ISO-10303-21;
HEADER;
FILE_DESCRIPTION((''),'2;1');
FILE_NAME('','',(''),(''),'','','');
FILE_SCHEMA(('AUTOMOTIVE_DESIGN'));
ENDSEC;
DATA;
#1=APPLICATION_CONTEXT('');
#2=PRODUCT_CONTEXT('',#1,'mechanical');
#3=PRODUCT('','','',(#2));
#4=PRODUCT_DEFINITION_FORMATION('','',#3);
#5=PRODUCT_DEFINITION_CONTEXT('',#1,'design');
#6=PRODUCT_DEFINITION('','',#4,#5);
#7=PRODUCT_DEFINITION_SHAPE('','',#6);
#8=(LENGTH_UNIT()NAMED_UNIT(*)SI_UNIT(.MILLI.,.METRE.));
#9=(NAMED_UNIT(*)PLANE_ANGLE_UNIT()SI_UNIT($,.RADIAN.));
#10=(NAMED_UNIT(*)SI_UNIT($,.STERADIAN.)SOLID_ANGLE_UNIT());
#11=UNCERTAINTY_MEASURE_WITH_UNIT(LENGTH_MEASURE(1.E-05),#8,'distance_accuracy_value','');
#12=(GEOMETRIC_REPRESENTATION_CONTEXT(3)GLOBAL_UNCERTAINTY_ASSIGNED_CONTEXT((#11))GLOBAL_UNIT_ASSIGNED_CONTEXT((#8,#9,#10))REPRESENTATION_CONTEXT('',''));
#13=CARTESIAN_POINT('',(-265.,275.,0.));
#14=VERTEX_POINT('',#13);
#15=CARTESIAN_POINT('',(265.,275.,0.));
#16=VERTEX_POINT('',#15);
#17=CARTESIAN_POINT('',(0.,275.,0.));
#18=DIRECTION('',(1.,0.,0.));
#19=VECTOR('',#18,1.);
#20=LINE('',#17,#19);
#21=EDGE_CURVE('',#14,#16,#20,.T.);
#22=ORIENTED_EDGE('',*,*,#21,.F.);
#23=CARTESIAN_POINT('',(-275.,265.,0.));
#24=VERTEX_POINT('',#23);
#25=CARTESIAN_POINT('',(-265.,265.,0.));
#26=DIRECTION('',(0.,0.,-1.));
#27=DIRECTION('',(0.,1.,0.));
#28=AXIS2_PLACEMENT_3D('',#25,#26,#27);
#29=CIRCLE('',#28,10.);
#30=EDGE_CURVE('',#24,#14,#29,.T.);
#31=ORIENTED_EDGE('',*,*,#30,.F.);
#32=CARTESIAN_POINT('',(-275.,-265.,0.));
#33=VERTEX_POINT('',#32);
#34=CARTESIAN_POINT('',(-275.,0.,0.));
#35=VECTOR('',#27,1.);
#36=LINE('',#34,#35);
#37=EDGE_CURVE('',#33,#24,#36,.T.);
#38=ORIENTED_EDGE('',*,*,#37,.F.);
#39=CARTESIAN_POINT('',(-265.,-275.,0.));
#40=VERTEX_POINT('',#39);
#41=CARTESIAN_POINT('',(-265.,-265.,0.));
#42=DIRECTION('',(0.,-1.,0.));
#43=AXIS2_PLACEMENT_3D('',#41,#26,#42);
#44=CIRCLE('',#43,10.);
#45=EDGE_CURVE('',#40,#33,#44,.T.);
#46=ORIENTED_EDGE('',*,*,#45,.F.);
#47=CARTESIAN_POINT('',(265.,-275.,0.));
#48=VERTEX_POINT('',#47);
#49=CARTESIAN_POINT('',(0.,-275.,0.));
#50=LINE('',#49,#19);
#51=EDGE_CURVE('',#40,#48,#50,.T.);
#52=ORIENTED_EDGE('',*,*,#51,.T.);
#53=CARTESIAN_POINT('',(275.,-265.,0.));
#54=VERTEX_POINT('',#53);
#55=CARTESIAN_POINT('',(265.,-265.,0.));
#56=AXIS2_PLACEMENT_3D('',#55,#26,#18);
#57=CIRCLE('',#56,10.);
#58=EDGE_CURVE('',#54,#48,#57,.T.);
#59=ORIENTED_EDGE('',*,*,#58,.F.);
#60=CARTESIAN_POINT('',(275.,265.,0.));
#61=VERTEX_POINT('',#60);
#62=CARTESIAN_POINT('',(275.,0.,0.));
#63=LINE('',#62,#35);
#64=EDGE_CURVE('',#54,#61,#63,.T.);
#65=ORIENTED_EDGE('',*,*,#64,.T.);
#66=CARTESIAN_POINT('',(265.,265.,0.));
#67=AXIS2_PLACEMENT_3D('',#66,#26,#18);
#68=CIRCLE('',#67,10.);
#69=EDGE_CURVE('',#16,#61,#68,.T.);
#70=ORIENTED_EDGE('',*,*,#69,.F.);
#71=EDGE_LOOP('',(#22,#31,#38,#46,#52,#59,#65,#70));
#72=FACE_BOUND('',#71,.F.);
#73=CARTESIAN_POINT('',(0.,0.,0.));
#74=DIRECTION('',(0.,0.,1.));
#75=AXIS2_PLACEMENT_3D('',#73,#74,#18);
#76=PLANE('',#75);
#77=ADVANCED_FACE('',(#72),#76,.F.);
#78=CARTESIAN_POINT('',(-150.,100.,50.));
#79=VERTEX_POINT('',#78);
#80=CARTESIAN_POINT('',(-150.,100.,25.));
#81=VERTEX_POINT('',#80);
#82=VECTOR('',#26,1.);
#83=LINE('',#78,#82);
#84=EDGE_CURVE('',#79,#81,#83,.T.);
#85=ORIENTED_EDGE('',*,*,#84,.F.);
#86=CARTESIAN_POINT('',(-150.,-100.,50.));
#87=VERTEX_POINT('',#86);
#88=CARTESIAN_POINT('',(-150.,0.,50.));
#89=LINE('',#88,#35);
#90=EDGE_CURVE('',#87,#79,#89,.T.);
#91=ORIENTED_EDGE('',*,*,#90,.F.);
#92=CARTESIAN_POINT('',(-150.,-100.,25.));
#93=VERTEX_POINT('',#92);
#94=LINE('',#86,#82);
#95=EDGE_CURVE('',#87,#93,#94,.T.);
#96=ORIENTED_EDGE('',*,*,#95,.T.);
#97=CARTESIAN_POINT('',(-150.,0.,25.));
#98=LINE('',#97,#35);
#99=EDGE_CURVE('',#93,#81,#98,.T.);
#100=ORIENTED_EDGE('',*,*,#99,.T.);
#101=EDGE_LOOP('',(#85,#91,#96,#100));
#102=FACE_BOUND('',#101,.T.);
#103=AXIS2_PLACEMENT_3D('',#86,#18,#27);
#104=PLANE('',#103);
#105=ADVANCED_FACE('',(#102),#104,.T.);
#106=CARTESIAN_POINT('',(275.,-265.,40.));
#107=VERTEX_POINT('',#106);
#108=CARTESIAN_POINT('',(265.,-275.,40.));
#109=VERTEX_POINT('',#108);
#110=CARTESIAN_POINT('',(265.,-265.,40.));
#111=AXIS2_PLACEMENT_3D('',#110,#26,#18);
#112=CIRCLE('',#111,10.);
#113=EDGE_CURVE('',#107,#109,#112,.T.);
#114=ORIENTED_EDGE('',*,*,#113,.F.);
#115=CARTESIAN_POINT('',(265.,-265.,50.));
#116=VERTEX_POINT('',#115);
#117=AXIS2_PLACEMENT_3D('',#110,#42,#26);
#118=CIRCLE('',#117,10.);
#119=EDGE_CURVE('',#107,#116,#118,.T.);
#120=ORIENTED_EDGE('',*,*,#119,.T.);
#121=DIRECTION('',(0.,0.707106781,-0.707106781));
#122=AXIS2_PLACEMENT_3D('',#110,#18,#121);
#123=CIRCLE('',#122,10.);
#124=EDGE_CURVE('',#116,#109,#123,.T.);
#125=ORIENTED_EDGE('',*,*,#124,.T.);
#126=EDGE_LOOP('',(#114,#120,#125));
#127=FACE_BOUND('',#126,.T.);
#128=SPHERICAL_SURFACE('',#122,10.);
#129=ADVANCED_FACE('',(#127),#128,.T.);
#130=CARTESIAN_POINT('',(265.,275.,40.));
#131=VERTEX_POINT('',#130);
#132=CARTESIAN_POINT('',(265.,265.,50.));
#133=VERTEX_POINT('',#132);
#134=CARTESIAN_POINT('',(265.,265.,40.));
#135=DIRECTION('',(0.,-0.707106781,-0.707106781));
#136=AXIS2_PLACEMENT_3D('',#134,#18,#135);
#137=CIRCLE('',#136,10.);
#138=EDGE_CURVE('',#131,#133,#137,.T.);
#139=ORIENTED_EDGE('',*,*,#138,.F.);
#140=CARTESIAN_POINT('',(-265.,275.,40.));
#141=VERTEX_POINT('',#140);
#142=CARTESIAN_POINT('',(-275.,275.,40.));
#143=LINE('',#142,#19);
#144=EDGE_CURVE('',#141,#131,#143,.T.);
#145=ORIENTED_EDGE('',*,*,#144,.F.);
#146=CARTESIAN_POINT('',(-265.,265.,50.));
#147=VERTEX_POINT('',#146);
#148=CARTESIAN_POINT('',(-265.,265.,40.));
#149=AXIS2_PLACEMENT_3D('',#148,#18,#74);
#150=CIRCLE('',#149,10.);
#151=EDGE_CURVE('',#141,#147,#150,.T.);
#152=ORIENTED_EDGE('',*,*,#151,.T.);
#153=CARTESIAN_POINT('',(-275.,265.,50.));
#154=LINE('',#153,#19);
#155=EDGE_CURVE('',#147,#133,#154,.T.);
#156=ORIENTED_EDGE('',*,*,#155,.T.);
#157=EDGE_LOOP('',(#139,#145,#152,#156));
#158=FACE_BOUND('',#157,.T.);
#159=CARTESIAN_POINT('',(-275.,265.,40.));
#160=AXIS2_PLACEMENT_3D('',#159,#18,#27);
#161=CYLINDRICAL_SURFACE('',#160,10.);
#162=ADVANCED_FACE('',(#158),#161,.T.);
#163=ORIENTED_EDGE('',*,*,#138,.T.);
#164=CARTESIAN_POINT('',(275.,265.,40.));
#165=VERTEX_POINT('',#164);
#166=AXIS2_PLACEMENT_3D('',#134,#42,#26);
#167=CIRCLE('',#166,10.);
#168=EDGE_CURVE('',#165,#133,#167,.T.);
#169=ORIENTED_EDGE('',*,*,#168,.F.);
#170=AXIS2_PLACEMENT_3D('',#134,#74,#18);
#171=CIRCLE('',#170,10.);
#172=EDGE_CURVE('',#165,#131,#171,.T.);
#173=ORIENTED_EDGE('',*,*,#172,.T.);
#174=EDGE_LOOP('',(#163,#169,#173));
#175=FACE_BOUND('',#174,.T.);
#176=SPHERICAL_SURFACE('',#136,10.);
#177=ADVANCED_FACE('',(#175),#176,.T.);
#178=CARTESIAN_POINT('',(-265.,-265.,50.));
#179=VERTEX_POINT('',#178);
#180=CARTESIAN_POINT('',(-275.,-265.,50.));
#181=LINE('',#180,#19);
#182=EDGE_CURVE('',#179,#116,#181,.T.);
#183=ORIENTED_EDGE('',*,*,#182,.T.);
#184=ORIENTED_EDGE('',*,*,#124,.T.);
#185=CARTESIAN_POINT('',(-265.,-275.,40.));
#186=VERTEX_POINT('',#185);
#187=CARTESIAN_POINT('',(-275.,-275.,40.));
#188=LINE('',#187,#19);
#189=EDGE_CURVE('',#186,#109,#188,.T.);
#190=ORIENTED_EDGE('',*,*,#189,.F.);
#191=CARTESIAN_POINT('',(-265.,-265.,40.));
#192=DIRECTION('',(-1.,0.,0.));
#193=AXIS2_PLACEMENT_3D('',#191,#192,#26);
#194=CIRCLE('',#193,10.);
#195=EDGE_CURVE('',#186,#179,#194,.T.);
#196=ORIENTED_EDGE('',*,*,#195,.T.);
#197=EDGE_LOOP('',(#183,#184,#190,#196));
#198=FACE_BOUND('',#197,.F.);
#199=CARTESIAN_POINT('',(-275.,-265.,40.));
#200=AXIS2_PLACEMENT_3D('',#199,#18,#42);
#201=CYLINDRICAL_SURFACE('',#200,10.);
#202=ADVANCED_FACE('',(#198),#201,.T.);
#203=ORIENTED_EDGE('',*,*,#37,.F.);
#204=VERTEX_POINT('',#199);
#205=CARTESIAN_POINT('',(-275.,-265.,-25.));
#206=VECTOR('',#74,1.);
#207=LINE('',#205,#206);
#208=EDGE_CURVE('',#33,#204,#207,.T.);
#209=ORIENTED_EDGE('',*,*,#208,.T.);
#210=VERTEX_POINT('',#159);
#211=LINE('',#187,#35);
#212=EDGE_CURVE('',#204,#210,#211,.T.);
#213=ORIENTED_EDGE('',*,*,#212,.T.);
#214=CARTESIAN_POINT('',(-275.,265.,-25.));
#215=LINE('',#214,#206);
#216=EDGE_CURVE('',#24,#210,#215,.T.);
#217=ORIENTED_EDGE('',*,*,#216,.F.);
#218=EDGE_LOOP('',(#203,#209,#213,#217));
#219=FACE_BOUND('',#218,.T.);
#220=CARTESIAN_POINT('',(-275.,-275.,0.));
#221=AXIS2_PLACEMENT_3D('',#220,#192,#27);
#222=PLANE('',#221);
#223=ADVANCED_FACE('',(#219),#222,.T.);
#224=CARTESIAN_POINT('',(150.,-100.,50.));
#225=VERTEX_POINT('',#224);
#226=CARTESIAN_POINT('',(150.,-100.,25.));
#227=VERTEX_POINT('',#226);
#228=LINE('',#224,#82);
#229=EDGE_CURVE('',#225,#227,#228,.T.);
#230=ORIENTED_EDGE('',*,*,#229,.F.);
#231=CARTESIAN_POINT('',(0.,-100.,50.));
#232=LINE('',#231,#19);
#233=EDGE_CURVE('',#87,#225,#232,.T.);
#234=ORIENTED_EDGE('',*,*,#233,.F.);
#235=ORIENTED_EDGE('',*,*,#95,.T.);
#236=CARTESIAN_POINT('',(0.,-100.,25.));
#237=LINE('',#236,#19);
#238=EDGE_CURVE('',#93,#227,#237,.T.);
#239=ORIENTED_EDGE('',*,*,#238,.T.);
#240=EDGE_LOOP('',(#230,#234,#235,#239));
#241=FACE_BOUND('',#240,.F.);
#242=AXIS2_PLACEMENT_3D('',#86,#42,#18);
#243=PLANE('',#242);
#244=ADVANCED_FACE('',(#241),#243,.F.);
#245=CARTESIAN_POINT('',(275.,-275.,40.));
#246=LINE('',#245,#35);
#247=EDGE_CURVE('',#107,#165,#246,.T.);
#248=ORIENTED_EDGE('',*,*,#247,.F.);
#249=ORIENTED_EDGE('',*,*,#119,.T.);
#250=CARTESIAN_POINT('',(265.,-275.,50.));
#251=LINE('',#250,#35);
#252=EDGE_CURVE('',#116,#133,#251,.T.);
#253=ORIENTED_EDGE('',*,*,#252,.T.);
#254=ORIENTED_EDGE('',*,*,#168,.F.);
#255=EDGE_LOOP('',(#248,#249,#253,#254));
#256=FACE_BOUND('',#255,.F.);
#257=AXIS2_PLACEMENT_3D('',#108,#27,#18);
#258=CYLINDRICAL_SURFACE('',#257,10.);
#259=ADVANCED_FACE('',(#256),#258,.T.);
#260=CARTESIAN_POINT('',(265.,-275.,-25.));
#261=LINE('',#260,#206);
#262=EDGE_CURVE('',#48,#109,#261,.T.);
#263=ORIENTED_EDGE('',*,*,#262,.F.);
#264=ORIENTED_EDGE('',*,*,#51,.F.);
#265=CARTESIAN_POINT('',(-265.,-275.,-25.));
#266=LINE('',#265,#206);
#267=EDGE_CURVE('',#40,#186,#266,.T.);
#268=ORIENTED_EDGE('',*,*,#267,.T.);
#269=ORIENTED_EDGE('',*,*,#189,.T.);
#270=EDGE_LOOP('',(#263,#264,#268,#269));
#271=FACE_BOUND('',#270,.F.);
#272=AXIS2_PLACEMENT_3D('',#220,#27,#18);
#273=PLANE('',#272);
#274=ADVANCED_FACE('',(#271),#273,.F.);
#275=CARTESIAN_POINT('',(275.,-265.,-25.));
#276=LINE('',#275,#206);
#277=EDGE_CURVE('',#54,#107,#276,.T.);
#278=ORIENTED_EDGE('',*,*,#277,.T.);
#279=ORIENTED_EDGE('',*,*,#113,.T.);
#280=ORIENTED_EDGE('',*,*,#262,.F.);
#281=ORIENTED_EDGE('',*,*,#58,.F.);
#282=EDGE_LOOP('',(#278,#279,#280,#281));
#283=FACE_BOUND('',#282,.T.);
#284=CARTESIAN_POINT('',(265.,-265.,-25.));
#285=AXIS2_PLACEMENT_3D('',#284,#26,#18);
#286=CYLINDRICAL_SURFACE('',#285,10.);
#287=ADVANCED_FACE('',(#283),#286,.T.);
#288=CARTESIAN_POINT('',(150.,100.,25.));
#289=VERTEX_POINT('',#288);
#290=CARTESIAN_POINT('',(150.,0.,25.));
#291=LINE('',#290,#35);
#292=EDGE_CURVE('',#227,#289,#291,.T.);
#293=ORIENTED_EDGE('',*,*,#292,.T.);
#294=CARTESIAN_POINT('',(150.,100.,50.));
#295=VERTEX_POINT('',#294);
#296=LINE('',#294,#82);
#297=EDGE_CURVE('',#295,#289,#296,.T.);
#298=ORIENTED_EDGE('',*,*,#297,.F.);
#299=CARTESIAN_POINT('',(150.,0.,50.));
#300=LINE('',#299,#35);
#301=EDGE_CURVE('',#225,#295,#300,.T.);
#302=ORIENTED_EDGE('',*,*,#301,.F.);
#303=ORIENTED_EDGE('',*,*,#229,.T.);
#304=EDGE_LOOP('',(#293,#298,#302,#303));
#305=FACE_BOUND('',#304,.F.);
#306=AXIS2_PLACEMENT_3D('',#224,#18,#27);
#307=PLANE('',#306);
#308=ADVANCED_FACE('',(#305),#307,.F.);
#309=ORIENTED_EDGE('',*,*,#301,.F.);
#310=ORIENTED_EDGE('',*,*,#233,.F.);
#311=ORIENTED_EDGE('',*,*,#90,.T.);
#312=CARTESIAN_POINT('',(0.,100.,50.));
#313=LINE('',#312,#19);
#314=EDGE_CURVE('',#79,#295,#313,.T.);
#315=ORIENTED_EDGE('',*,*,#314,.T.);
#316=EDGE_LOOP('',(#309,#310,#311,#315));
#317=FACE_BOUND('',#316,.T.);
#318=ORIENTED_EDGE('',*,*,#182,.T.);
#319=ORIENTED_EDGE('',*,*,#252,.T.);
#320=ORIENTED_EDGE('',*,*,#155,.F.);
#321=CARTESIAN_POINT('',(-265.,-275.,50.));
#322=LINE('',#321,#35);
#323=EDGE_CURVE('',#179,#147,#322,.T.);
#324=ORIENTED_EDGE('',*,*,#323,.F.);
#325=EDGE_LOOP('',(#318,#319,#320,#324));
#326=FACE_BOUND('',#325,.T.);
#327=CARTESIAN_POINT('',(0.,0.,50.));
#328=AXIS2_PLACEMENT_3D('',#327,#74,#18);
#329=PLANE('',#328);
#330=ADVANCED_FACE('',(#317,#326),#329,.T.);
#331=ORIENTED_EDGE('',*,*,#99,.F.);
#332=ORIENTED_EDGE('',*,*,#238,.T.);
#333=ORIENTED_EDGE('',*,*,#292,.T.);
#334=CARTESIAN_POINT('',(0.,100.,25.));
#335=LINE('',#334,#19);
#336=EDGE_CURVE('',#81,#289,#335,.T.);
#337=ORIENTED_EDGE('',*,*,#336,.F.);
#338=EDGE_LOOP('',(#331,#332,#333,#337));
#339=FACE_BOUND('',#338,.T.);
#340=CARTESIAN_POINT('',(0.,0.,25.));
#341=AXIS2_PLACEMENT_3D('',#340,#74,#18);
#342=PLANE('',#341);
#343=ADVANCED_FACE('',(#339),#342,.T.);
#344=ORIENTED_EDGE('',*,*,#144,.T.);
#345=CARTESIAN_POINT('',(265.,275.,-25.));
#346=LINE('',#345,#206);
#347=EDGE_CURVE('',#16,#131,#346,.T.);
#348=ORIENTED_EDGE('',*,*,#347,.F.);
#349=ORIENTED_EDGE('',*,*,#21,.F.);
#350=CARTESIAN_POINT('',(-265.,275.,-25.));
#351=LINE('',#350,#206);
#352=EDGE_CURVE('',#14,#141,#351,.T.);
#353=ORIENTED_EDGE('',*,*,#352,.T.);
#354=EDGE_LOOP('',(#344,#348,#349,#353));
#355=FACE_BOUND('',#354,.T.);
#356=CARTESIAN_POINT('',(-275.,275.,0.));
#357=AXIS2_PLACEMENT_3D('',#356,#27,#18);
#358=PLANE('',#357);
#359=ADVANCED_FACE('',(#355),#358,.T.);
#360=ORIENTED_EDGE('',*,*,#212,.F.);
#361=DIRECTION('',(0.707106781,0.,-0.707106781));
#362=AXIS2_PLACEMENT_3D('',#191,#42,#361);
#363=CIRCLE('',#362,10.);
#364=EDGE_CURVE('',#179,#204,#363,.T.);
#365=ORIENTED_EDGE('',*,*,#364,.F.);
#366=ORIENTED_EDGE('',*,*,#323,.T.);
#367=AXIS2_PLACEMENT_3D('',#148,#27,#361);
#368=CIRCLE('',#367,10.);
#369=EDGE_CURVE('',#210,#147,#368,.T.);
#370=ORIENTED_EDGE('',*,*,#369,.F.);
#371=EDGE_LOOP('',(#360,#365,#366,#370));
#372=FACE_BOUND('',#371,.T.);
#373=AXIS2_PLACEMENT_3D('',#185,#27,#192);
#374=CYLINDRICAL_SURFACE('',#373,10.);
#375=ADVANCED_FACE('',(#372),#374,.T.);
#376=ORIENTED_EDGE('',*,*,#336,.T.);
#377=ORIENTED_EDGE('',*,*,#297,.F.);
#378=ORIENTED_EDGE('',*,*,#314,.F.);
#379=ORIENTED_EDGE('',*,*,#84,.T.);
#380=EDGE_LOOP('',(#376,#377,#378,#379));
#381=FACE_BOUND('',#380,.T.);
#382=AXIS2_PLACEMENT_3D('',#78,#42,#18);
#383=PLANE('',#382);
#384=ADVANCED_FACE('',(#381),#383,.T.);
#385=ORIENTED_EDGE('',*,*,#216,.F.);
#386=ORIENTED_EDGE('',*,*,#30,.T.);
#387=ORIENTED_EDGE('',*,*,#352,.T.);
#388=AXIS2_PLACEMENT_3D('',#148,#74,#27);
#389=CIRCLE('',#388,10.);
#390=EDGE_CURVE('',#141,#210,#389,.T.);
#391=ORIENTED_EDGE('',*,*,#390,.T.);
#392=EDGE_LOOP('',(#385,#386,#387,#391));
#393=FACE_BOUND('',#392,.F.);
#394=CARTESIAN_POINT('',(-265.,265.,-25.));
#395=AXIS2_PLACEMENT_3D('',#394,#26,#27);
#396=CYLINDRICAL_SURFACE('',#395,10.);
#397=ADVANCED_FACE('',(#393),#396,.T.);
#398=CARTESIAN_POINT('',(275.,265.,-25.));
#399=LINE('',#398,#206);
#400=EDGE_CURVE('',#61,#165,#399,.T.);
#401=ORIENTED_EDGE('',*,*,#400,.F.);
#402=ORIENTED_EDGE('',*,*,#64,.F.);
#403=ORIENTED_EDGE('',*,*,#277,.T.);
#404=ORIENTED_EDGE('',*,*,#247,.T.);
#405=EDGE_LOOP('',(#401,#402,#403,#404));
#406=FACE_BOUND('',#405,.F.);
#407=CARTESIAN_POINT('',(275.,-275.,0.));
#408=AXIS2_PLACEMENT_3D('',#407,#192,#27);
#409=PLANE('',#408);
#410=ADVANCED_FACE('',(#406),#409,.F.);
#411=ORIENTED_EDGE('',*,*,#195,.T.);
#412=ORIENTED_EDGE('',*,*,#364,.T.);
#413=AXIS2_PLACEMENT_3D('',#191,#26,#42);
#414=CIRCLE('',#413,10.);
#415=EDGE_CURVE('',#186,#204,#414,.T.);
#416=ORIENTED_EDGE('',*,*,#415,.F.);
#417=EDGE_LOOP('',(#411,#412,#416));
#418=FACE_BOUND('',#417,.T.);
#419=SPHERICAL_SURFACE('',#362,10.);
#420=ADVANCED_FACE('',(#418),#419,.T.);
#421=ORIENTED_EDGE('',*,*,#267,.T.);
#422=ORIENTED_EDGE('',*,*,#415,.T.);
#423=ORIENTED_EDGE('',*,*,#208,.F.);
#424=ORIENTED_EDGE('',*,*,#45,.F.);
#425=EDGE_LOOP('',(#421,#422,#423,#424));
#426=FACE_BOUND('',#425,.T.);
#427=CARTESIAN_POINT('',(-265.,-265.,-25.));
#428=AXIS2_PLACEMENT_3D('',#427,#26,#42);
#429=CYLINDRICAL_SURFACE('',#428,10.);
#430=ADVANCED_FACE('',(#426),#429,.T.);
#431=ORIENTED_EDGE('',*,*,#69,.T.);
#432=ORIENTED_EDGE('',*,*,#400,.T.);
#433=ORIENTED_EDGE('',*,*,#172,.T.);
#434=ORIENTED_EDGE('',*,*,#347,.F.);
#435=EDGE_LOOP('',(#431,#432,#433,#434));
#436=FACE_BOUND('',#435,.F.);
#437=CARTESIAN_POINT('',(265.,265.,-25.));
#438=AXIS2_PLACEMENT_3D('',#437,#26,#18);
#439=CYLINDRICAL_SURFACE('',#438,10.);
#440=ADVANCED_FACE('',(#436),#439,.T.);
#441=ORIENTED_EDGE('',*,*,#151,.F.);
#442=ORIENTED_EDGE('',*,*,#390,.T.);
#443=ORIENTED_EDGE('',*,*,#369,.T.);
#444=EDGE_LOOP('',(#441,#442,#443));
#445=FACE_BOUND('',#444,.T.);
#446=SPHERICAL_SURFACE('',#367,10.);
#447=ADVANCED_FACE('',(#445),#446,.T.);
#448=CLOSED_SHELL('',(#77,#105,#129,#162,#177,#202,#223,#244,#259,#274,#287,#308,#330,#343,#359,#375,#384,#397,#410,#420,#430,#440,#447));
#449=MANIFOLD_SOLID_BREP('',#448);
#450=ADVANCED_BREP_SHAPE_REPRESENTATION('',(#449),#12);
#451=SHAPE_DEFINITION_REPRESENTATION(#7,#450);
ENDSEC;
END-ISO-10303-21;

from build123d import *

# Parameters (mm, degrees)
F0_W         = 550
F0_H         = 550
F1_DEPTH     = 50
F2_R         = 10
F3_T1_DEPTH  = 65
F3_S5_W      = 10
F3_S5_H      = 10
F3_T6_DEPTH  = 10
F3_S11_W     = 10
F3_S11_H     = 10
F3_T12_DEPTH = 10
F3_S17_W     = 10
F3_S17_H     = 10
F3_T18_DEPTH = 10
F3_S23_W     = 10
F3_S23_H     = 10
F3_T24_DEPTH = 10
F4_W         = 300
F4_H         = 200
F5_DEPTH     = 25


# Not quite as in the source:
# - a fillet or chamfer that OpenCascade refuses, or shapes differently, is made with other operations: its cross-section is extruded or revolved along the edge and cut away or added


with BuildPart() as f1:
    # F0 (on Top) → F1 (new body)
    with BuildSketch(Plane.XY):
        Rectangle(F0_W, F0_H)
    extrude(amount=F1_DEPTH)

    # F2
    f2_edges = [f1.edges().sort_by_distance(p)[0] for p in [
        (0, -275, 50),
        (275, 0, 50),
        (0, 275, 50),
        (-275, 0, 50),
    ]]
    fillet(f2_edges, radius=F2_R)

    # F3: fillet of radius 10 on 4 edges, made by hand

    # F3_s2 → F3_t1 (cut)
    with BuildSketch(Plane.XY.offset(-25)):
        with BuildLine():
            ThreePointArc((275, -265), (272.0710678119, -272.0710678119), (265, -275))
            Line((265, -275), (275, -275))
            Line((275, -275), (275, -265))
        make_face()
        with BuildLine():
            ThreePointArc((-265, -275), (-272.0710678119, -272.0710678119), (-275, -265))
            Line((-275, -265), (-275, -275))
            Line((-275, -275), (-265, -275))
        make_face()
        with BuildLine():
            ThreePointArc((275, 265), (272.0710678119, 272.0710678119), (265, 275))
            Line((265, 275), (275, 275))
            Line((275, 275), (275, 265))
        make_face()
        with BuildLine():
            ThreePointArc((-265, 275), (-272.0710678119, 272.0710678119), (-275, 265))
            Line((-275, 265), (-275, 275))
            Line((-275, 275), (-265, 275))
        make_face()
    extrude(amount=F3_T1_DEPTH, mode=Mode.SUBTRACT)


with BuildPart() as f3_tool4:
    # F3_s5 → F3_t6 (new body)
    with BuildSketch(Plane.XZ.offset(-265)):
        with Locations((-270, 45)):
            Rectangle(F3_S5_W, F3_S5_H)
    extrude(amount=-F3_T6_DEPTH)

    # F3_s7 → F3_t8 (revolve, cut)
    with BuildSketch(Plane(origin=(-265, 265, 40), x_dir=(0.7071067812, 0, -0.7071067812), z_dir=(0.7071067812, 0, 0.7071067812))):
        with BuildLine():
            ThreePointArc((0, -10), (10, 0), (0, 10))
            Line((0, 10), (0, -10))
        make_face()
    revolve(axis=Axis((-265, 265, 40), (0, 1, 0)), mode=Mode.SUBTRACT)


with BuildPart() as f1_1:
    add(f1.part)

    # F3_t3: cut F3_tool4
    add(f3_tool4.part, mode=Mode.SUBTRACT)


with BuildPart() as f3_tool10:
    # F3_s11 → F3_t12 (new body)
    with BuildSketch(Plane.YZ.offset(265)):
        with Locations((270, 45)):
            Rectangle(F3_S11_W, F3_S11_H)
    extrude(amount=F3_T12_DEPTH)

    # F3_s13 → F3_t14 (revolve, cut)
    with BuildSketch(Plane(origin=(265, 265, 40), x_dir=(0, -0.7071067812, -0.7071067812), z_dir=(0, -0.7071067812, 0.7071067812))):
        with BuildLine():
            ThreePointArc((0, -10), (10, 0), (0, 10))
            Line((0, 10), (0, -10))
        make_face()
    revolve(axis=Axis((265, 265, 40), (1, 0, 0)), mode=Mode.SUBTRACT)


with BuildPart() as f1_2:
    add(f1_1.part)

    # F3_t9: cut F3_tool10
    add(f3_tool10.part, mode=Mode.SUBTRACT)


with BuildPart() as f3_tool16:
    # F3_s17 → F3_t18 (new body)
    with BuildSketch(Plane.XZ.offset(265)):
        with Locations((-270, 45)):
            Rectangle(F3_S17_W, F3_S17_H)
    extrude(amount=F3_T18_DEPTH)

    # F3_s19 → F3_t20 (revolve, cut)
    with BuildSketch(Plane(origin=(-265, -265, 40), x_dir=(0.7071067812, 0, -0.7071067812), z_dir=(-0.7071067812, 0, -0.7071067812))):
        with BuildLine():
            ThreePointArc((0, -10), (10, 0), (0, 10))
            Line((0, 10), (0, -10))
        make_face()
    revolve(axis=Axis((-265, -265, 40), (0, -1, 0)), mode=Mode.SUBTRACT)


with BuildPart() as f1_3:
    add(f1_2.part)

    # F3_t15: cut F3_tool16
    add(f3_tool16.part, mode=Mode.SUBTRACT)


with BuildPart() as f3_tool22:
    # F3_s23 → F3_t24 (new body)
    with BuildSketch(Plane.YZ.offset(265)):
        with Locations((-270, 45)):
            Rectangle(F3_S23_W, F3_S23_H)
    extrude(amount=F3_T24_DEPTH)

    # F3_s25 → F3_t26 (revolve, cut)
    with BuildSketch(Plane(origin=(265, -265, 40), x_dir=(0, 0.7071067812, -0.7071067812), z_dir=(0, -0.7071067812, -0.7071067812))):
        with BuildLine():
            ThreePointArc((0, -10), (10, 0), (0, 10))
            Line((0, 10), (0, -10))
        make_face()
    revolve(axis=Axis((265, -265, 40), (1, 0, 0)), mode=Mode.SUBTRACT)


with BuildPart() as f1_4:
    add(f1_3.part)

    # F3_t21: cut F3_tool22
    add(f3_tool22.part, mode=Mode.SUBTRACT)

    # F4 (on face) → F5 (cut)
    with BuildSketch(Plane.XY.offset(50)):
        Rectangle(F4_W, F4_H)
    extrude(amount=-F5_DEPTH, mode=Mode.SUBTRACT)


solid = f1_4.part
